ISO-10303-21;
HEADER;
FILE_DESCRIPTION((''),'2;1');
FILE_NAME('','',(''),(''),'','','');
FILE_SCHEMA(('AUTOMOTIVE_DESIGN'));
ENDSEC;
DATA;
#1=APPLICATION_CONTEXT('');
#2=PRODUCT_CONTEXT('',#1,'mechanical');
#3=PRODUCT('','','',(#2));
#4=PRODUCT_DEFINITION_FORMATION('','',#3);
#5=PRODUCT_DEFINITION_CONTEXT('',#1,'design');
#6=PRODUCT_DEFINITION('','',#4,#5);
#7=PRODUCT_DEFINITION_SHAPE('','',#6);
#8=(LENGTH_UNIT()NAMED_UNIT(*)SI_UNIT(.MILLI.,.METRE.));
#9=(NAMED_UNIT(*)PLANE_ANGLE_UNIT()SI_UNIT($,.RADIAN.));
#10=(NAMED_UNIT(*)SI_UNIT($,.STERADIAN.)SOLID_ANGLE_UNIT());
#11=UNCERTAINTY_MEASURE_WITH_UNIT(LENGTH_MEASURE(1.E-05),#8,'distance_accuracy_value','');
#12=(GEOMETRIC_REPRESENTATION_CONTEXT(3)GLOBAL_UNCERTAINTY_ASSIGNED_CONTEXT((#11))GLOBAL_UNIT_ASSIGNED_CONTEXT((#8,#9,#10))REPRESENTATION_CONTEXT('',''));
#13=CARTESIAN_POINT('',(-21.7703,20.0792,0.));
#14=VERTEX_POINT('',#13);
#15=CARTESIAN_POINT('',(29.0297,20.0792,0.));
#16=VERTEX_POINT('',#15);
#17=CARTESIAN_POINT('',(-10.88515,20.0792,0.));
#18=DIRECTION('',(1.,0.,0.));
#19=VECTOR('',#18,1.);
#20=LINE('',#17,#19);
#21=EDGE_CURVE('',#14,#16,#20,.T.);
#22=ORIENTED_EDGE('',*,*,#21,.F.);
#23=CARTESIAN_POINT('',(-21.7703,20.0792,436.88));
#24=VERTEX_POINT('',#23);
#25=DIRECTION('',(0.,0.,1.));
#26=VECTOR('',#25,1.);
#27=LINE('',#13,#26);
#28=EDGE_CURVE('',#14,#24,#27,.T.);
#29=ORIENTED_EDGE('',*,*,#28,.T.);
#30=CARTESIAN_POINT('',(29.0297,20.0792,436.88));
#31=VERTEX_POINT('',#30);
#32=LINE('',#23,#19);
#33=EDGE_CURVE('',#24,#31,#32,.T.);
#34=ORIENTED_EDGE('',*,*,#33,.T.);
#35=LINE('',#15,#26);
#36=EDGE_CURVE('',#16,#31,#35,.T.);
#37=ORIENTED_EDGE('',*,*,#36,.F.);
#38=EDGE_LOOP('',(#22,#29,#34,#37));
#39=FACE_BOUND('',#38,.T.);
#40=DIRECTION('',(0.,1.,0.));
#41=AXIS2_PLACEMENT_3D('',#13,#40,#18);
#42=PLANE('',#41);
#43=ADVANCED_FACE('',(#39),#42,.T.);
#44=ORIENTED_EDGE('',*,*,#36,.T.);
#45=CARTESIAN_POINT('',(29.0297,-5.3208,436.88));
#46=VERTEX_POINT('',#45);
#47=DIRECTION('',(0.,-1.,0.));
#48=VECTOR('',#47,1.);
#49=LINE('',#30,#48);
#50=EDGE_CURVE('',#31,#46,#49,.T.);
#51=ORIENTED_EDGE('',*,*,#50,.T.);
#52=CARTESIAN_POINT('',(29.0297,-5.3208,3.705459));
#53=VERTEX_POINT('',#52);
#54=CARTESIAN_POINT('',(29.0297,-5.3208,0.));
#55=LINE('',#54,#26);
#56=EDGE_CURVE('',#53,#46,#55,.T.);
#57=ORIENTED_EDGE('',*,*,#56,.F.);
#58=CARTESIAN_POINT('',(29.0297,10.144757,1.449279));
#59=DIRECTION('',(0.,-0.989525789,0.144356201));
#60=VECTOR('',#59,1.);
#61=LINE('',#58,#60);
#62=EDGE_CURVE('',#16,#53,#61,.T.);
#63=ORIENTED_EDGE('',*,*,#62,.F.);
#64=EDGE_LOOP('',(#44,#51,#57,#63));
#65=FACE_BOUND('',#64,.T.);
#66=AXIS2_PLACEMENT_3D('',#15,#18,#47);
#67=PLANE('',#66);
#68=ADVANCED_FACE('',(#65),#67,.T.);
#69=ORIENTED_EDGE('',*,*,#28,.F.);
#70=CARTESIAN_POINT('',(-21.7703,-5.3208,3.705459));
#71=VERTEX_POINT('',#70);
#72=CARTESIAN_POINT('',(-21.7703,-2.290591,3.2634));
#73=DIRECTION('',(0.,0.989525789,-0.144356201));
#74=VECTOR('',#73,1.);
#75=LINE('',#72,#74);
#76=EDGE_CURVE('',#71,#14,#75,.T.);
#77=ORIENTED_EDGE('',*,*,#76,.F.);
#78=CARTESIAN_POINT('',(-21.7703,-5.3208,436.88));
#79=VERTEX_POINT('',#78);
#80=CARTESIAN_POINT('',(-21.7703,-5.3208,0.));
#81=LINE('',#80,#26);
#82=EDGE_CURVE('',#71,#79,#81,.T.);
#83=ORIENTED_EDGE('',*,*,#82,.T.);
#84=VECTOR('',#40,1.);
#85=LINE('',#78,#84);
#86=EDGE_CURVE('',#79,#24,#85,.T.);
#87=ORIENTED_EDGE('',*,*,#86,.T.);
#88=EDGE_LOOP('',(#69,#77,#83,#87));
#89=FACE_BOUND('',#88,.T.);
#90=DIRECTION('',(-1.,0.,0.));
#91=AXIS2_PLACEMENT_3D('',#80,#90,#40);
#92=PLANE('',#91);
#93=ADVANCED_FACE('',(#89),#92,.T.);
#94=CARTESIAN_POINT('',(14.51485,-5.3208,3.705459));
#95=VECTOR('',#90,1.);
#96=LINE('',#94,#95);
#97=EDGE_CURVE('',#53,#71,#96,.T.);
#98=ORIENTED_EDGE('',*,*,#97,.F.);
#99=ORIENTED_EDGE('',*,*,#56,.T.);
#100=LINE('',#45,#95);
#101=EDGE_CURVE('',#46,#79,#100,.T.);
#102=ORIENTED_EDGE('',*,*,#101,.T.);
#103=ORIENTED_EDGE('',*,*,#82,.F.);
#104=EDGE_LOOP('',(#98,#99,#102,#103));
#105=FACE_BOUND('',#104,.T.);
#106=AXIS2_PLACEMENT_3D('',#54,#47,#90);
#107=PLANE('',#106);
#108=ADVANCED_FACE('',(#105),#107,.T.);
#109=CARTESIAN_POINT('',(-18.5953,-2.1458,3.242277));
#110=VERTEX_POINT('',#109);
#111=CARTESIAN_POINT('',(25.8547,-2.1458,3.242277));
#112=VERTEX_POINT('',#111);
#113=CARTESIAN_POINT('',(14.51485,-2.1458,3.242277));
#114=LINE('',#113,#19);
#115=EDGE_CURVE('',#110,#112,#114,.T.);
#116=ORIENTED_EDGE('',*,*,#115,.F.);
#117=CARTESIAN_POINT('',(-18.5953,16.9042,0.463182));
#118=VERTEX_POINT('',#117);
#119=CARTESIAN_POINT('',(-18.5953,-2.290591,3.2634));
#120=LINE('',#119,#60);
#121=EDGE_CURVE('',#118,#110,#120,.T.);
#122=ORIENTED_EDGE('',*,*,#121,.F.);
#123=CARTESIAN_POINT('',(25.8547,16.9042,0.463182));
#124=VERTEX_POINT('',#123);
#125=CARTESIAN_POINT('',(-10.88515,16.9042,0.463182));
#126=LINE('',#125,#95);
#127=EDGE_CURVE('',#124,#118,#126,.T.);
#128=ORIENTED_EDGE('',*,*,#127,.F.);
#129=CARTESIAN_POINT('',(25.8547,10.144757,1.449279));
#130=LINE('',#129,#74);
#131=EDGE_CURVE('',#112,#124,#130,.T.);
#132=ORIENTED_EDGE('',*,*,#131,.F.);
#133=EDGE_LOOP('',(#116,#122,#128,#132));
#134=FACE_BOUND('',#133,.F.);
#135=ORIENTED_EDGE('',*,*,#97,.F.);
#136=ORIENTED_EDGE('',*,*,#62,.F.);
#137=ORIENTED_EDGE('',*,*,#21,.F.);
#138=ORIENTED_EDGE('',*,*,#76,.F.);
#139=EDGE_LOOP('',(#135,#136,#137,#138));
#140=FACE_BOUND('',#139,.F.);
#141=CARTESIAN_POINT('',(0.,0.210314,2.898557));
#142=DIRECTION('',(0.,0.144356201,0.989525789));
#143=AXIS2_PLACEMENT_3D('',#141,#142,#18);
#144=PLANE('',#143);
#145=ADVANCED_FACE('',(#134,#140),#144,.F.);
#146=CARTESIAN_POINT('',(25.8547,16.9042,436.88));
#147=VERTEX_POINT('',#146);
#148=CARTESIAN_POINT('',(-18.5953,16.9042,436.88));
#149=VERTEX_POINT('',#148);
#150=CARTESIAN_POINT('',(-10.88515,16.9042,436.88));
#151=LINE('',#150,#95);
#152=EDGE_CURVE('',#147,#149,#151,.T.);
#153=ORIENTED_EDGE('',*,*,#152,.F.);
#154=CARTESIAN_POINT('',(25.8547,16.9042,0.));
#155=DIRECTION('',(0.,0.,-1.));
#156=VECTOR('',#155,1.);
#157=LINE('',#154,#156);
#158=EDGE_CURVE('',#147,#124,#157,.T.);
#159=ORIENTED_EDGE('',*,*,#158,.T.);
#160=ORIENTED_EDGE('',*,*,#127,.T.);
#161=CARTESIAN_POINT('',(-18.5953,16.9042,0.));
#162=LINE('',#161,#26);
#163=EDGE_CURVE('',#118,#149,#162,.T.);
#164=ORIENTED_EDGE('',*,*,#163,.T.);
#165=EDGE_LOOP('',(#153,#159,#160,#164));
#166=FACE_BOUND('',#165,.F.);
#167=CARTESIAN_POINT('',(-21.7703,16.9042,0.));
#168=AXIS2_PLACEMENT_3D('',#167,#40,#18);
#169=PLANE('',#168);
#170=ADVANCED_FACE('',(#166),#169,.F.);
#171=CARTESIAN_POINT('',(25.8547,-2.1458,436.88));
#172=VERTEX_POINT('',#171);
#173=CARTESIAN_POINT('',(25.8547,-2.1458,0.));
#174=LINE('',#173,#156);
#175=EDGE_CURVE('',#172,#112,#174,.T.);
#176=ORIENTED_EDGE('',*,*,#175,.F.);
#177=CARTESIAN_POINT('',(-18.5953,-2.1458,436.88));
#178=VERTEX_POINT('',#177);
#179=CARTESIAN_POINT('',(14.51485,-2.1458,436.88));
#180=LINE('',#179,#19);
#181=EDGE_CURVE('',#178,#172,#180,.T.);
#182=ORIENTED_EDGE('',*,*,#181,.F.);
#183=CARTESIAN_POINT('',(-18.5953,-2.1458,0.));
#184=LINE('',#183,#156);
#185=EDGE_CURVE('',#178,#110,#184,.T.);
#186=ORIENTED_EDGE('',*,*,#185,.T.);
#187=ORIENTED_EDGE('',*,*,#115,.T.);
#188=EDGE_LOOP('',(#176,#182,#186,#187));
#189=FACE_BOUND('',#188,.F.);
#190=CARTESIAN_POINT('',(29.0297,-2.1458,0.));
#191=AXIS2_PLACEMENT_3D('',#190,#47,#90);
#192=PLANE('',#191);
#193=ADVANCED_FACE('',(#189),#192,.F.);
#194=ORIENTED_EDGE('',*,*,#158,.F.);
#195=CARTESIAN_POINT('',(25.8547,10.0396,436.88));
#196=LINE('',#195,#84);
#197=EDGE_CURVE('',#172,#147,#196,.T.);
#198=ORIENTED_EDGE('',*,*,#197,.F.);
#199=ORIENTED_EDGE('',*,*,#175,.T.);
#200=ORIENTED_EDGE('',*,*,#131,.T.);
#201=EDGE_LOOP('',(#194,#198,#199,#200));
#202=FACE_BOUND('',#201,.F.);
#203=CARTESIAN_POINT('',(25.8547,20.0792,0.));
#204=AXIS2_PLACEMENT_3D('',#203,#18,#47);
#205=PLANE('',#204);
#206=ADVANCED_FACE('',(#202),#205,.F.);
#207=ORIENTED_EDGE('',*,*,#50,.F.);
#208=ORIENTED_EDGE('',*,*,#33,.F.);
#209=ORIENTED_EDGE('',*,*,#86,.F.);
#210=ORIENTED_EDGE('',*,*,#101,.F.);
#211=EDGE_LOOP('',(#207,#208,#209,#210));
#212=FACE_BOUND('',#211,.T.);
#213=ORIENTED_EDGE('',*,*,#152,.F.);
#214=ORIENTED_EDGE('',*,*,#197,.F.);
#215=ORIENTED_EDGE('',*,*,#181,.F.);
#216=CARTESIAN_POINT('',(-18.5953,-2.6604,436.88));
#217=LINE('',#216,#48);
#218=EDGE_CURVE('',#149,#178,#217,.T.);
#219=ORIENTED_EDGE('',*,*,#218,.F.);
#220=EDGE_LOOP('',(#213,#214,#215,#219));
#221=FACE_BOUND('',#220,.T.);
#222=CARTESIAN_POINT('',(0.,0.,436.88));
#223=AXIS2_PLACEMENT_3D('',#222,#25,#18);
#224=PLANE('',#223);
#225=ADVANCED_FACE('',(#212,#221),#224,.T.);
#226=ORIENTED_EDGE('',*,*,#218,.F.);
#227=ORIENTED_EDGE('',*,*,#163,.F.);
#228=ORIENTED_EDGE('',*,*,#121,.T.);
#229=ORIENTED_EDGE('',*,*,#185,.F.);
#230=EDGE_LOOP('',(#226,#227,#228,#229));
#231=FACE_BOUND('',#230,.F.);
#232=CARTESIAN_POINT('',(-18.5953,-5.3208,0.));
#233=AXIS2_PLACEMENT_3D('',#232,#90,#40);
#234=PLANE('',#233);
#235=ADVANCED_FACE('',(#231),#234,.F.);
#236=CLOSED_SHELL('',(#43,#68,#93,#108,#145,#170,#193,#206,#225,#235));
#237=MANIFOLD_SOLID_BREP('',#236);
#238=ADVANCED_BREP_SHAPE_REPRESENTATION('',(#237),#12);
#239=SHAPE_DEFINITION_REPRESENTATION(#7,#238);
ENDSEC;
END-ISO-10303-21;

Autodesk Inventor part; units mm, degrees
ref_plane "YZ Plane" through (0, 0, 0) normal (1, 0, 0) x (0, 1, 0)
ref_plane "XZ Plane" through (0, 0, 0) normal (0, 1, 0) x (-1, 0, 0)
ref_plane "XY Plane" through (0, 0, 0) normal (0, 0, 1) x (1, 0, 0)
sketch "Sketch1" plane through (0, 0, 0) normal (0, 0, 1) x (1, 0, 0)
  line L0 (-21.7703, 20.0792) -> (29.0297, 20.0792)
  line L1 (29.0297, 20.0792) -> (29.0297, -5.3208)
  line L2 (29.0297, -5.3208) -> (-21.7703, -5.3208)
  line L3 (-21.7703, -5.3208) -> (-21.7703, 20.0792)
  dimension "d0" = 25.4
  dimension "d1" = 50.8
extrude "Extrusion1" add sketch "Sketch1" along normal blind 436.88
shell "Shell1" thickness 3.175 removed faces 2 at (-4.8369, 11.6125, 436.88) at (-4.8369, 11.6125, 0)
draft "FaceDraft1" angle 8.3 pull direction (0, -1, 0) faces at (-3.7786, 19.0209, 0) fixed edges at (3.6297, 20.0792, 0)
properties part number "FE-00013-05"
